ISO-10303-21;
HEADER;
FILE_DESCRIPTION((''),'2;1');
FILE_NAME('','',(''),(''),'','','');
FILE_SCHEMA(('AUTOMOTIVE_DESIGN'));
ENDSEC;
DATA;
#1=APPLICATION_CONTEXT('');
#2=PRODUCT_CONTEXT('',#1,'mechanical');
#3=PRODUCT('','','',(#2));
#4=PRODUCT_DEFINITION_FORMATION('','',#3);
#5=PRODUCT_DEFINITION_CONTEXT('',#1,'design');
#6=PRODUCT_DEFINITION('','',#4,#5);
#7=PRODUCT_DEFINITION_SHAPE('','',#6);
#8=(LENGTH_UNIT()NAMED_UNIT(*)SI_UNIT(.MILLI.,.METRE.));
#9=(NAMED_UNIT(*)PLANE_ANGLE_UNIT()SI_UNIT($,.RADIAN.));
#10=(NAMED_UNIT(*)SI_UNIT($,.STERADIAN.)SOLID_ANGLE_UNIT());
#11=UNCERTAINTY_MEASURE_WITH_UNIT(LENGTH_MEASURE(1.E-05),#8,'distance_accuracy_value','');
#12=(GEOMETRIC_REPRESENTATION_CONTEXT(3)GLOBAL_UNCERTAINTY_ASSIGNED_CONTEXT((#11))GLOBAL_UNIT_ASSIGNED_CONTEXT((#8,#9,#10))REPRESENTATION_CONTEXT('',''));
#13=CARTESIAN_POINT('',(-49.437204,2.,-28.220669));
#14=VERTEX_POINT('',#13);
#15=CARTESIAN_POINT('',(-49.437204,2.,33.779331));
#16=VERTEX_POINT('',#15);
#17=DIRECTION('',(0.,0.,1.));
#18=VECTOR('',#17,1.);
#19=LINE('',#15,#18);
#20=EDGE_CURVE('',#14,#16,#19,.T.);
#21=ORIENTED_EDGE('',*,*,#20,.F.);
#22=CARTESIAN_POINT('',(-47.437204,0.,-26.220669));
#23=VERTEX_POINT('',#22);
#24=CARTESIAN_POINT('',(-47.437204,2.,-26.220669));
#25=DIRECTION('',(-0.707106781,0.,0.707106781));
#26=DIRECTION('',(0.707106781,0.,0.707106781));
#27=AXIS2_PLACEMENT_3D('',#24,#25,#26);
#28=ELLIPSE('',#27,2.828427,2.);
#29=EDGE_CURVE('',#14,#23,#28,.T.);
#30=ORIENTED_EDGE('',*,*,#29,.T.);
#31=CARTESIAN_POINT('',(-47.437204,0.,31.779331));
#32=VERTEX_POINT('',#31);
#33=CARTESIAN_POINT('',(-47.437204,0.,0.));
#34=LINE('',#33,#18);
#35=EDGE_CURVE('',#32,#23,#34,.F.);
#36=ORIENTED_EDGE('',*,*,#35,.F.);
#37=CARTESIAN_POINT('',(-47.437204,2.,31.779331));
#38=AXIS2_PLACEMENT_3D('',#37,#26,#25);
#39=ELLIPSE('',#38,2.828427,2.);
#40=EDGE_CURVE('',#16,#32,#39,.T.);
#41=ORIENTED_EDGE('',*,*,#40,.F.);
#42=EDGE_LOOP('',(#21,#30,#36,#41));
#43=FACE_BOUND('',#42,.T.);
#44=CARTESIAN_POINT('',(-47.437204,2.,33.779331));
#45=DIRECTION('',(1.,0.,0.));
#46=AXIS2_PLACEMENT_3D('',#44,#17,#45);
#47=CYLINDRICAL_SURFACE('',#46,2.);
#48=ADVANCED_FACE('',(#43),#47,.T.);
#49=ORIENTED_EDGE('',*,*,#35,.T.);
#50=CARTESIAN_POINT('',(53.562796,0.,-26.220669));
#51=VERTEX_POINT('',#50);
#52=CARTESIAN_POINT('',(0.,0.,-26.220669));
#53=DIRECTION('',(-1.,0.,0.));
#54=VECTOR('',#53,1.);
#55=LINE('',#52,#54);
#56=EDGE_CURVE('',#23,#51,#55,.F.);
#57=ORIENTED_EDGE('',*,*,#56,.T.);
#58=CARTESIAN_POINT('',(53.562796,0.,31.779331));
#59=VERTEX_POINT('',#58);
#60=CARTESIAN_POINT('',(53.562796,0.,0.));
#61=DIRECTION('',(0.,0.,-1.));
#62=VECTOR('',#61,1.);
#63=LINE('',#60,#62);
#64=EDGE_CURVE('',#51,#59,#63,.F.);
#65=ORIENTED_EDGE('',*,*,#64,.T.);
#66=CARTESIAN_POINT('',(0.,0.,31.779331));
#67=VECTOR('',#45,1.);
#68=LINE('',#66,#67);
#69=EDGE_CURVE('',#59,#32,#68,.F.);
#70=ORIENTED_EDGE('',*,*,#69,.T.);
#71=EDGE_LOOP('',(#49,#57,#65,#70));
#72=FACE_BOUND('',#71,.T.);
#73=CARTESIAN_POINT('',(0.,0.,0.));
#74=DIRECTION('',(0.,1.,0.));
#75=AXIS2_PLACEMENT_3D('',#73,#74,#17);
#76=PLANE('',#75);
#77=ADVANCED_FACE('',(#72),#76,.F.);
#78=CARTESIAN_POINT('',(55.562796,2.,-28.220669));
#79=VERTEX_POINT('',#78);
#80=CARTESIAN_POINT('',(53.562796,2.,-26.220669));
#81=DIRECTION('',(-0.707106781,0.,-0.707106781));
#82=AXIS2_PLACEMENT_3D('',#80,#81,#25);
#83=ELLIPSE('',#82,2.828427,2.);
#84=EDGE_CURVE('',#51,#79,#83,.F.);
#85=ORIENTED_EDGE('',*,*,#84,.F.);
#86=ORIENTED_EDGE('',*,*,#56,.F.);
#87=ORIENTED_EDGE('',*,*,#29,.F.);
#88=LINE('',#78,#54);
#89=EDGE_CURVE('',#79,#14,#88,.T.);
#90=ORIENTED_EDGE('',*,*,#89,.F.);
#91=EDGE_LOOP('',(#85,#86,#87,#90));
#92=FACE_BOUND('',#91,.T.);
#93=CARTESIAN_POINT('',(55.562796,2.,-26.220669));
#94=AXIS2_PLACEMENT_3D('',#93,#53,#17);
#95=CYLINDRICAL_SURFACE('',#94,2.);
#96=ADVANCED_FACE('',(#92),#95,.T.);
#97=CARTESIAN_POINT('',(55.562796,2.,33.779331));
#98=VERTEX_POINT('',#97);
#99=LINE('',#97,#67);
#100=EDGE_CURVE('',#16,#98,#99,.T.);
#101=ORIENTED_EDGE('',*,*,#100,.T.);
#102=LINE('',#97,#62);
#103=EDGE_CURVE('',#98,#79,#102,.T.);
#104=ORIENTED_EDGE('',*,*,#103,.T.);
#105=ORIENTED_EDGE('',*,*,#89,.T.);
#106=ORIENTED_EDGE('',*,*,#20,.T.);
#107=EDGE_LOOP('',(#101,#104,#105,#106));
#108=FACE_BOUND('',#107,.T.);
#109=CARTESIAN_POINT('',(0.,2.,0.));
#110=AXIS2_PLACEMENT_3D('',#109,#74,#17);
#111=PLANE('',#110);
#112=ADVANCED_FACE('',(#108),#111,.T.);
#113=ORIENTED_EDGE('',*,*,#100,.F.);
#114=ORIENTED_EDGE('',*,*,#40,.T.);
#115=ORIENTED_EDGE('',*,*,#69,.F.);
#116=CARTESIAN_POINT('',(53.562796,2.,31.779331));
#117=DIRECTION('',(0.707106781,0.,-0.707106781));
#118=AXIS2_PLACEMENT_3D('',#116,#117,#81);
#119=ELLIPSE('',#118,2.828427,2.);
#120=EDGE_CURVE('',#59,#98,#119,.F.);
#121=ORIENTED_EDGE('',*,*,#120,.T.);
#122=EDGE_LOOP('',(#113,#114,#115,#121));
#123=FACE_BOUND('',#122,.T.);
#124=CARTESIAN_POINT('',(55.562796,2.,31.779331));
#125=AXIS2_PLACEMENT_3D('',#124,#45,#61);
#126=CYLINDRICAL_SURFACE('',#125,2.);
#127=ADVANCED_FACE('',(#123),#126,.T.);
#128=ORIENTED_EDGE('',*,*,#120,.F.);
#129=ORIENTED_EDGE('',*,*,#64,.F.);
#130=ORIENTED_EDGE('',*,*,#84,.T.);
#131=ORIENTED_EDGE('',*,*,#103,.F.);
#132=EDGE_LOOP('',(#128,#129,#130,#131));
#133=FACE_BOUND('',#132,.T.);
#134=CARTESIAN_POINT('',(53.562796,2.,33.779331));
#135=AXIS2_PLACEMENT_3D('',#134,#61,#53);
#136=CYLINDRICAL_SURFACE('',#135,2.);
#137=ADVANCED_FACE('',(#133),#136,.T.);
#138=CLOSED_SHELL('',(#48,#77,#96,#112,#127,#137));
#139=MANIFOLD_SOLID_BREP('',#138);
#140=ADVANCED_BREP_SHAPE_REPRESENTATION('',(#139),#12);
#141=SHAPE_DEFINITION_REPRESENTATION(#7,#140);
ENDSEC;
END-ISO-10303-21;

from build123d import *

# Parameters (mm, degrees)
SKETCH1_W           = 104.999999998
SKETCH1_H           = 61.999999997
SKETCH1_W_2         = 102
SKETCH1_H_2         = 59
BOSS_EXTRUDE1_DEPTH = 2
SKETCH1_2_W         = 102
SKETCH1_2_H         = 59
BOSS_EXTRUDE2_DEPTH = 2
FILLET1_R           = 2


with BuildPart() as part:
    # Sketch1 → Boss-Extrude1 (new body)
    with BuildSketch(Plane(origin=(0, 0, 0), x_dir=(1, 0, 0), z_dir=(0, 1, 0))):
        with Locations((3.062796012, -2.779331445)):
            Rectangle(SKETCH1_W, SKETCH1_H)
        with Locations((3.062796013, -2.779331447)):
            Rectangle(SKETCH1_W_2, SKETCH1_H_2, mode=Mode.SUBTRACT)
    extrude(amount=BOSS_EXTRUDE1_DEPTH)

    # Sketch1<2> → Boss-Extrude2 (add)
    with BuildSketch(Plane(origin=(0, 0, 0), x_dir=(1, 0, 0), z_dir=(0, 1, 0))):
        with Locations((3.062796013, -2.779331447)):
            Rectangle(SKETCH1_2_W, SKETCH1_2_H)
    extrude(amount=BOSS_EXTRUDE2_DEPTH)

    # Fillet1
    fillet1_edges = [part.edges().sort_by_distance(p)[0] for p in [
        (3.062796012, 0, 33.779331444),
        (55.562796011, 0, 2.779331445),
        (3.062796012, 0, -28.220668553),
        (-49.437203987, 0, 2.779331445),
    ]]
    fillet(fillet1_edges, radius=FILLET1_R - 0.0001)  # a hair under: the kernel refuses the full size


solid = part.part
